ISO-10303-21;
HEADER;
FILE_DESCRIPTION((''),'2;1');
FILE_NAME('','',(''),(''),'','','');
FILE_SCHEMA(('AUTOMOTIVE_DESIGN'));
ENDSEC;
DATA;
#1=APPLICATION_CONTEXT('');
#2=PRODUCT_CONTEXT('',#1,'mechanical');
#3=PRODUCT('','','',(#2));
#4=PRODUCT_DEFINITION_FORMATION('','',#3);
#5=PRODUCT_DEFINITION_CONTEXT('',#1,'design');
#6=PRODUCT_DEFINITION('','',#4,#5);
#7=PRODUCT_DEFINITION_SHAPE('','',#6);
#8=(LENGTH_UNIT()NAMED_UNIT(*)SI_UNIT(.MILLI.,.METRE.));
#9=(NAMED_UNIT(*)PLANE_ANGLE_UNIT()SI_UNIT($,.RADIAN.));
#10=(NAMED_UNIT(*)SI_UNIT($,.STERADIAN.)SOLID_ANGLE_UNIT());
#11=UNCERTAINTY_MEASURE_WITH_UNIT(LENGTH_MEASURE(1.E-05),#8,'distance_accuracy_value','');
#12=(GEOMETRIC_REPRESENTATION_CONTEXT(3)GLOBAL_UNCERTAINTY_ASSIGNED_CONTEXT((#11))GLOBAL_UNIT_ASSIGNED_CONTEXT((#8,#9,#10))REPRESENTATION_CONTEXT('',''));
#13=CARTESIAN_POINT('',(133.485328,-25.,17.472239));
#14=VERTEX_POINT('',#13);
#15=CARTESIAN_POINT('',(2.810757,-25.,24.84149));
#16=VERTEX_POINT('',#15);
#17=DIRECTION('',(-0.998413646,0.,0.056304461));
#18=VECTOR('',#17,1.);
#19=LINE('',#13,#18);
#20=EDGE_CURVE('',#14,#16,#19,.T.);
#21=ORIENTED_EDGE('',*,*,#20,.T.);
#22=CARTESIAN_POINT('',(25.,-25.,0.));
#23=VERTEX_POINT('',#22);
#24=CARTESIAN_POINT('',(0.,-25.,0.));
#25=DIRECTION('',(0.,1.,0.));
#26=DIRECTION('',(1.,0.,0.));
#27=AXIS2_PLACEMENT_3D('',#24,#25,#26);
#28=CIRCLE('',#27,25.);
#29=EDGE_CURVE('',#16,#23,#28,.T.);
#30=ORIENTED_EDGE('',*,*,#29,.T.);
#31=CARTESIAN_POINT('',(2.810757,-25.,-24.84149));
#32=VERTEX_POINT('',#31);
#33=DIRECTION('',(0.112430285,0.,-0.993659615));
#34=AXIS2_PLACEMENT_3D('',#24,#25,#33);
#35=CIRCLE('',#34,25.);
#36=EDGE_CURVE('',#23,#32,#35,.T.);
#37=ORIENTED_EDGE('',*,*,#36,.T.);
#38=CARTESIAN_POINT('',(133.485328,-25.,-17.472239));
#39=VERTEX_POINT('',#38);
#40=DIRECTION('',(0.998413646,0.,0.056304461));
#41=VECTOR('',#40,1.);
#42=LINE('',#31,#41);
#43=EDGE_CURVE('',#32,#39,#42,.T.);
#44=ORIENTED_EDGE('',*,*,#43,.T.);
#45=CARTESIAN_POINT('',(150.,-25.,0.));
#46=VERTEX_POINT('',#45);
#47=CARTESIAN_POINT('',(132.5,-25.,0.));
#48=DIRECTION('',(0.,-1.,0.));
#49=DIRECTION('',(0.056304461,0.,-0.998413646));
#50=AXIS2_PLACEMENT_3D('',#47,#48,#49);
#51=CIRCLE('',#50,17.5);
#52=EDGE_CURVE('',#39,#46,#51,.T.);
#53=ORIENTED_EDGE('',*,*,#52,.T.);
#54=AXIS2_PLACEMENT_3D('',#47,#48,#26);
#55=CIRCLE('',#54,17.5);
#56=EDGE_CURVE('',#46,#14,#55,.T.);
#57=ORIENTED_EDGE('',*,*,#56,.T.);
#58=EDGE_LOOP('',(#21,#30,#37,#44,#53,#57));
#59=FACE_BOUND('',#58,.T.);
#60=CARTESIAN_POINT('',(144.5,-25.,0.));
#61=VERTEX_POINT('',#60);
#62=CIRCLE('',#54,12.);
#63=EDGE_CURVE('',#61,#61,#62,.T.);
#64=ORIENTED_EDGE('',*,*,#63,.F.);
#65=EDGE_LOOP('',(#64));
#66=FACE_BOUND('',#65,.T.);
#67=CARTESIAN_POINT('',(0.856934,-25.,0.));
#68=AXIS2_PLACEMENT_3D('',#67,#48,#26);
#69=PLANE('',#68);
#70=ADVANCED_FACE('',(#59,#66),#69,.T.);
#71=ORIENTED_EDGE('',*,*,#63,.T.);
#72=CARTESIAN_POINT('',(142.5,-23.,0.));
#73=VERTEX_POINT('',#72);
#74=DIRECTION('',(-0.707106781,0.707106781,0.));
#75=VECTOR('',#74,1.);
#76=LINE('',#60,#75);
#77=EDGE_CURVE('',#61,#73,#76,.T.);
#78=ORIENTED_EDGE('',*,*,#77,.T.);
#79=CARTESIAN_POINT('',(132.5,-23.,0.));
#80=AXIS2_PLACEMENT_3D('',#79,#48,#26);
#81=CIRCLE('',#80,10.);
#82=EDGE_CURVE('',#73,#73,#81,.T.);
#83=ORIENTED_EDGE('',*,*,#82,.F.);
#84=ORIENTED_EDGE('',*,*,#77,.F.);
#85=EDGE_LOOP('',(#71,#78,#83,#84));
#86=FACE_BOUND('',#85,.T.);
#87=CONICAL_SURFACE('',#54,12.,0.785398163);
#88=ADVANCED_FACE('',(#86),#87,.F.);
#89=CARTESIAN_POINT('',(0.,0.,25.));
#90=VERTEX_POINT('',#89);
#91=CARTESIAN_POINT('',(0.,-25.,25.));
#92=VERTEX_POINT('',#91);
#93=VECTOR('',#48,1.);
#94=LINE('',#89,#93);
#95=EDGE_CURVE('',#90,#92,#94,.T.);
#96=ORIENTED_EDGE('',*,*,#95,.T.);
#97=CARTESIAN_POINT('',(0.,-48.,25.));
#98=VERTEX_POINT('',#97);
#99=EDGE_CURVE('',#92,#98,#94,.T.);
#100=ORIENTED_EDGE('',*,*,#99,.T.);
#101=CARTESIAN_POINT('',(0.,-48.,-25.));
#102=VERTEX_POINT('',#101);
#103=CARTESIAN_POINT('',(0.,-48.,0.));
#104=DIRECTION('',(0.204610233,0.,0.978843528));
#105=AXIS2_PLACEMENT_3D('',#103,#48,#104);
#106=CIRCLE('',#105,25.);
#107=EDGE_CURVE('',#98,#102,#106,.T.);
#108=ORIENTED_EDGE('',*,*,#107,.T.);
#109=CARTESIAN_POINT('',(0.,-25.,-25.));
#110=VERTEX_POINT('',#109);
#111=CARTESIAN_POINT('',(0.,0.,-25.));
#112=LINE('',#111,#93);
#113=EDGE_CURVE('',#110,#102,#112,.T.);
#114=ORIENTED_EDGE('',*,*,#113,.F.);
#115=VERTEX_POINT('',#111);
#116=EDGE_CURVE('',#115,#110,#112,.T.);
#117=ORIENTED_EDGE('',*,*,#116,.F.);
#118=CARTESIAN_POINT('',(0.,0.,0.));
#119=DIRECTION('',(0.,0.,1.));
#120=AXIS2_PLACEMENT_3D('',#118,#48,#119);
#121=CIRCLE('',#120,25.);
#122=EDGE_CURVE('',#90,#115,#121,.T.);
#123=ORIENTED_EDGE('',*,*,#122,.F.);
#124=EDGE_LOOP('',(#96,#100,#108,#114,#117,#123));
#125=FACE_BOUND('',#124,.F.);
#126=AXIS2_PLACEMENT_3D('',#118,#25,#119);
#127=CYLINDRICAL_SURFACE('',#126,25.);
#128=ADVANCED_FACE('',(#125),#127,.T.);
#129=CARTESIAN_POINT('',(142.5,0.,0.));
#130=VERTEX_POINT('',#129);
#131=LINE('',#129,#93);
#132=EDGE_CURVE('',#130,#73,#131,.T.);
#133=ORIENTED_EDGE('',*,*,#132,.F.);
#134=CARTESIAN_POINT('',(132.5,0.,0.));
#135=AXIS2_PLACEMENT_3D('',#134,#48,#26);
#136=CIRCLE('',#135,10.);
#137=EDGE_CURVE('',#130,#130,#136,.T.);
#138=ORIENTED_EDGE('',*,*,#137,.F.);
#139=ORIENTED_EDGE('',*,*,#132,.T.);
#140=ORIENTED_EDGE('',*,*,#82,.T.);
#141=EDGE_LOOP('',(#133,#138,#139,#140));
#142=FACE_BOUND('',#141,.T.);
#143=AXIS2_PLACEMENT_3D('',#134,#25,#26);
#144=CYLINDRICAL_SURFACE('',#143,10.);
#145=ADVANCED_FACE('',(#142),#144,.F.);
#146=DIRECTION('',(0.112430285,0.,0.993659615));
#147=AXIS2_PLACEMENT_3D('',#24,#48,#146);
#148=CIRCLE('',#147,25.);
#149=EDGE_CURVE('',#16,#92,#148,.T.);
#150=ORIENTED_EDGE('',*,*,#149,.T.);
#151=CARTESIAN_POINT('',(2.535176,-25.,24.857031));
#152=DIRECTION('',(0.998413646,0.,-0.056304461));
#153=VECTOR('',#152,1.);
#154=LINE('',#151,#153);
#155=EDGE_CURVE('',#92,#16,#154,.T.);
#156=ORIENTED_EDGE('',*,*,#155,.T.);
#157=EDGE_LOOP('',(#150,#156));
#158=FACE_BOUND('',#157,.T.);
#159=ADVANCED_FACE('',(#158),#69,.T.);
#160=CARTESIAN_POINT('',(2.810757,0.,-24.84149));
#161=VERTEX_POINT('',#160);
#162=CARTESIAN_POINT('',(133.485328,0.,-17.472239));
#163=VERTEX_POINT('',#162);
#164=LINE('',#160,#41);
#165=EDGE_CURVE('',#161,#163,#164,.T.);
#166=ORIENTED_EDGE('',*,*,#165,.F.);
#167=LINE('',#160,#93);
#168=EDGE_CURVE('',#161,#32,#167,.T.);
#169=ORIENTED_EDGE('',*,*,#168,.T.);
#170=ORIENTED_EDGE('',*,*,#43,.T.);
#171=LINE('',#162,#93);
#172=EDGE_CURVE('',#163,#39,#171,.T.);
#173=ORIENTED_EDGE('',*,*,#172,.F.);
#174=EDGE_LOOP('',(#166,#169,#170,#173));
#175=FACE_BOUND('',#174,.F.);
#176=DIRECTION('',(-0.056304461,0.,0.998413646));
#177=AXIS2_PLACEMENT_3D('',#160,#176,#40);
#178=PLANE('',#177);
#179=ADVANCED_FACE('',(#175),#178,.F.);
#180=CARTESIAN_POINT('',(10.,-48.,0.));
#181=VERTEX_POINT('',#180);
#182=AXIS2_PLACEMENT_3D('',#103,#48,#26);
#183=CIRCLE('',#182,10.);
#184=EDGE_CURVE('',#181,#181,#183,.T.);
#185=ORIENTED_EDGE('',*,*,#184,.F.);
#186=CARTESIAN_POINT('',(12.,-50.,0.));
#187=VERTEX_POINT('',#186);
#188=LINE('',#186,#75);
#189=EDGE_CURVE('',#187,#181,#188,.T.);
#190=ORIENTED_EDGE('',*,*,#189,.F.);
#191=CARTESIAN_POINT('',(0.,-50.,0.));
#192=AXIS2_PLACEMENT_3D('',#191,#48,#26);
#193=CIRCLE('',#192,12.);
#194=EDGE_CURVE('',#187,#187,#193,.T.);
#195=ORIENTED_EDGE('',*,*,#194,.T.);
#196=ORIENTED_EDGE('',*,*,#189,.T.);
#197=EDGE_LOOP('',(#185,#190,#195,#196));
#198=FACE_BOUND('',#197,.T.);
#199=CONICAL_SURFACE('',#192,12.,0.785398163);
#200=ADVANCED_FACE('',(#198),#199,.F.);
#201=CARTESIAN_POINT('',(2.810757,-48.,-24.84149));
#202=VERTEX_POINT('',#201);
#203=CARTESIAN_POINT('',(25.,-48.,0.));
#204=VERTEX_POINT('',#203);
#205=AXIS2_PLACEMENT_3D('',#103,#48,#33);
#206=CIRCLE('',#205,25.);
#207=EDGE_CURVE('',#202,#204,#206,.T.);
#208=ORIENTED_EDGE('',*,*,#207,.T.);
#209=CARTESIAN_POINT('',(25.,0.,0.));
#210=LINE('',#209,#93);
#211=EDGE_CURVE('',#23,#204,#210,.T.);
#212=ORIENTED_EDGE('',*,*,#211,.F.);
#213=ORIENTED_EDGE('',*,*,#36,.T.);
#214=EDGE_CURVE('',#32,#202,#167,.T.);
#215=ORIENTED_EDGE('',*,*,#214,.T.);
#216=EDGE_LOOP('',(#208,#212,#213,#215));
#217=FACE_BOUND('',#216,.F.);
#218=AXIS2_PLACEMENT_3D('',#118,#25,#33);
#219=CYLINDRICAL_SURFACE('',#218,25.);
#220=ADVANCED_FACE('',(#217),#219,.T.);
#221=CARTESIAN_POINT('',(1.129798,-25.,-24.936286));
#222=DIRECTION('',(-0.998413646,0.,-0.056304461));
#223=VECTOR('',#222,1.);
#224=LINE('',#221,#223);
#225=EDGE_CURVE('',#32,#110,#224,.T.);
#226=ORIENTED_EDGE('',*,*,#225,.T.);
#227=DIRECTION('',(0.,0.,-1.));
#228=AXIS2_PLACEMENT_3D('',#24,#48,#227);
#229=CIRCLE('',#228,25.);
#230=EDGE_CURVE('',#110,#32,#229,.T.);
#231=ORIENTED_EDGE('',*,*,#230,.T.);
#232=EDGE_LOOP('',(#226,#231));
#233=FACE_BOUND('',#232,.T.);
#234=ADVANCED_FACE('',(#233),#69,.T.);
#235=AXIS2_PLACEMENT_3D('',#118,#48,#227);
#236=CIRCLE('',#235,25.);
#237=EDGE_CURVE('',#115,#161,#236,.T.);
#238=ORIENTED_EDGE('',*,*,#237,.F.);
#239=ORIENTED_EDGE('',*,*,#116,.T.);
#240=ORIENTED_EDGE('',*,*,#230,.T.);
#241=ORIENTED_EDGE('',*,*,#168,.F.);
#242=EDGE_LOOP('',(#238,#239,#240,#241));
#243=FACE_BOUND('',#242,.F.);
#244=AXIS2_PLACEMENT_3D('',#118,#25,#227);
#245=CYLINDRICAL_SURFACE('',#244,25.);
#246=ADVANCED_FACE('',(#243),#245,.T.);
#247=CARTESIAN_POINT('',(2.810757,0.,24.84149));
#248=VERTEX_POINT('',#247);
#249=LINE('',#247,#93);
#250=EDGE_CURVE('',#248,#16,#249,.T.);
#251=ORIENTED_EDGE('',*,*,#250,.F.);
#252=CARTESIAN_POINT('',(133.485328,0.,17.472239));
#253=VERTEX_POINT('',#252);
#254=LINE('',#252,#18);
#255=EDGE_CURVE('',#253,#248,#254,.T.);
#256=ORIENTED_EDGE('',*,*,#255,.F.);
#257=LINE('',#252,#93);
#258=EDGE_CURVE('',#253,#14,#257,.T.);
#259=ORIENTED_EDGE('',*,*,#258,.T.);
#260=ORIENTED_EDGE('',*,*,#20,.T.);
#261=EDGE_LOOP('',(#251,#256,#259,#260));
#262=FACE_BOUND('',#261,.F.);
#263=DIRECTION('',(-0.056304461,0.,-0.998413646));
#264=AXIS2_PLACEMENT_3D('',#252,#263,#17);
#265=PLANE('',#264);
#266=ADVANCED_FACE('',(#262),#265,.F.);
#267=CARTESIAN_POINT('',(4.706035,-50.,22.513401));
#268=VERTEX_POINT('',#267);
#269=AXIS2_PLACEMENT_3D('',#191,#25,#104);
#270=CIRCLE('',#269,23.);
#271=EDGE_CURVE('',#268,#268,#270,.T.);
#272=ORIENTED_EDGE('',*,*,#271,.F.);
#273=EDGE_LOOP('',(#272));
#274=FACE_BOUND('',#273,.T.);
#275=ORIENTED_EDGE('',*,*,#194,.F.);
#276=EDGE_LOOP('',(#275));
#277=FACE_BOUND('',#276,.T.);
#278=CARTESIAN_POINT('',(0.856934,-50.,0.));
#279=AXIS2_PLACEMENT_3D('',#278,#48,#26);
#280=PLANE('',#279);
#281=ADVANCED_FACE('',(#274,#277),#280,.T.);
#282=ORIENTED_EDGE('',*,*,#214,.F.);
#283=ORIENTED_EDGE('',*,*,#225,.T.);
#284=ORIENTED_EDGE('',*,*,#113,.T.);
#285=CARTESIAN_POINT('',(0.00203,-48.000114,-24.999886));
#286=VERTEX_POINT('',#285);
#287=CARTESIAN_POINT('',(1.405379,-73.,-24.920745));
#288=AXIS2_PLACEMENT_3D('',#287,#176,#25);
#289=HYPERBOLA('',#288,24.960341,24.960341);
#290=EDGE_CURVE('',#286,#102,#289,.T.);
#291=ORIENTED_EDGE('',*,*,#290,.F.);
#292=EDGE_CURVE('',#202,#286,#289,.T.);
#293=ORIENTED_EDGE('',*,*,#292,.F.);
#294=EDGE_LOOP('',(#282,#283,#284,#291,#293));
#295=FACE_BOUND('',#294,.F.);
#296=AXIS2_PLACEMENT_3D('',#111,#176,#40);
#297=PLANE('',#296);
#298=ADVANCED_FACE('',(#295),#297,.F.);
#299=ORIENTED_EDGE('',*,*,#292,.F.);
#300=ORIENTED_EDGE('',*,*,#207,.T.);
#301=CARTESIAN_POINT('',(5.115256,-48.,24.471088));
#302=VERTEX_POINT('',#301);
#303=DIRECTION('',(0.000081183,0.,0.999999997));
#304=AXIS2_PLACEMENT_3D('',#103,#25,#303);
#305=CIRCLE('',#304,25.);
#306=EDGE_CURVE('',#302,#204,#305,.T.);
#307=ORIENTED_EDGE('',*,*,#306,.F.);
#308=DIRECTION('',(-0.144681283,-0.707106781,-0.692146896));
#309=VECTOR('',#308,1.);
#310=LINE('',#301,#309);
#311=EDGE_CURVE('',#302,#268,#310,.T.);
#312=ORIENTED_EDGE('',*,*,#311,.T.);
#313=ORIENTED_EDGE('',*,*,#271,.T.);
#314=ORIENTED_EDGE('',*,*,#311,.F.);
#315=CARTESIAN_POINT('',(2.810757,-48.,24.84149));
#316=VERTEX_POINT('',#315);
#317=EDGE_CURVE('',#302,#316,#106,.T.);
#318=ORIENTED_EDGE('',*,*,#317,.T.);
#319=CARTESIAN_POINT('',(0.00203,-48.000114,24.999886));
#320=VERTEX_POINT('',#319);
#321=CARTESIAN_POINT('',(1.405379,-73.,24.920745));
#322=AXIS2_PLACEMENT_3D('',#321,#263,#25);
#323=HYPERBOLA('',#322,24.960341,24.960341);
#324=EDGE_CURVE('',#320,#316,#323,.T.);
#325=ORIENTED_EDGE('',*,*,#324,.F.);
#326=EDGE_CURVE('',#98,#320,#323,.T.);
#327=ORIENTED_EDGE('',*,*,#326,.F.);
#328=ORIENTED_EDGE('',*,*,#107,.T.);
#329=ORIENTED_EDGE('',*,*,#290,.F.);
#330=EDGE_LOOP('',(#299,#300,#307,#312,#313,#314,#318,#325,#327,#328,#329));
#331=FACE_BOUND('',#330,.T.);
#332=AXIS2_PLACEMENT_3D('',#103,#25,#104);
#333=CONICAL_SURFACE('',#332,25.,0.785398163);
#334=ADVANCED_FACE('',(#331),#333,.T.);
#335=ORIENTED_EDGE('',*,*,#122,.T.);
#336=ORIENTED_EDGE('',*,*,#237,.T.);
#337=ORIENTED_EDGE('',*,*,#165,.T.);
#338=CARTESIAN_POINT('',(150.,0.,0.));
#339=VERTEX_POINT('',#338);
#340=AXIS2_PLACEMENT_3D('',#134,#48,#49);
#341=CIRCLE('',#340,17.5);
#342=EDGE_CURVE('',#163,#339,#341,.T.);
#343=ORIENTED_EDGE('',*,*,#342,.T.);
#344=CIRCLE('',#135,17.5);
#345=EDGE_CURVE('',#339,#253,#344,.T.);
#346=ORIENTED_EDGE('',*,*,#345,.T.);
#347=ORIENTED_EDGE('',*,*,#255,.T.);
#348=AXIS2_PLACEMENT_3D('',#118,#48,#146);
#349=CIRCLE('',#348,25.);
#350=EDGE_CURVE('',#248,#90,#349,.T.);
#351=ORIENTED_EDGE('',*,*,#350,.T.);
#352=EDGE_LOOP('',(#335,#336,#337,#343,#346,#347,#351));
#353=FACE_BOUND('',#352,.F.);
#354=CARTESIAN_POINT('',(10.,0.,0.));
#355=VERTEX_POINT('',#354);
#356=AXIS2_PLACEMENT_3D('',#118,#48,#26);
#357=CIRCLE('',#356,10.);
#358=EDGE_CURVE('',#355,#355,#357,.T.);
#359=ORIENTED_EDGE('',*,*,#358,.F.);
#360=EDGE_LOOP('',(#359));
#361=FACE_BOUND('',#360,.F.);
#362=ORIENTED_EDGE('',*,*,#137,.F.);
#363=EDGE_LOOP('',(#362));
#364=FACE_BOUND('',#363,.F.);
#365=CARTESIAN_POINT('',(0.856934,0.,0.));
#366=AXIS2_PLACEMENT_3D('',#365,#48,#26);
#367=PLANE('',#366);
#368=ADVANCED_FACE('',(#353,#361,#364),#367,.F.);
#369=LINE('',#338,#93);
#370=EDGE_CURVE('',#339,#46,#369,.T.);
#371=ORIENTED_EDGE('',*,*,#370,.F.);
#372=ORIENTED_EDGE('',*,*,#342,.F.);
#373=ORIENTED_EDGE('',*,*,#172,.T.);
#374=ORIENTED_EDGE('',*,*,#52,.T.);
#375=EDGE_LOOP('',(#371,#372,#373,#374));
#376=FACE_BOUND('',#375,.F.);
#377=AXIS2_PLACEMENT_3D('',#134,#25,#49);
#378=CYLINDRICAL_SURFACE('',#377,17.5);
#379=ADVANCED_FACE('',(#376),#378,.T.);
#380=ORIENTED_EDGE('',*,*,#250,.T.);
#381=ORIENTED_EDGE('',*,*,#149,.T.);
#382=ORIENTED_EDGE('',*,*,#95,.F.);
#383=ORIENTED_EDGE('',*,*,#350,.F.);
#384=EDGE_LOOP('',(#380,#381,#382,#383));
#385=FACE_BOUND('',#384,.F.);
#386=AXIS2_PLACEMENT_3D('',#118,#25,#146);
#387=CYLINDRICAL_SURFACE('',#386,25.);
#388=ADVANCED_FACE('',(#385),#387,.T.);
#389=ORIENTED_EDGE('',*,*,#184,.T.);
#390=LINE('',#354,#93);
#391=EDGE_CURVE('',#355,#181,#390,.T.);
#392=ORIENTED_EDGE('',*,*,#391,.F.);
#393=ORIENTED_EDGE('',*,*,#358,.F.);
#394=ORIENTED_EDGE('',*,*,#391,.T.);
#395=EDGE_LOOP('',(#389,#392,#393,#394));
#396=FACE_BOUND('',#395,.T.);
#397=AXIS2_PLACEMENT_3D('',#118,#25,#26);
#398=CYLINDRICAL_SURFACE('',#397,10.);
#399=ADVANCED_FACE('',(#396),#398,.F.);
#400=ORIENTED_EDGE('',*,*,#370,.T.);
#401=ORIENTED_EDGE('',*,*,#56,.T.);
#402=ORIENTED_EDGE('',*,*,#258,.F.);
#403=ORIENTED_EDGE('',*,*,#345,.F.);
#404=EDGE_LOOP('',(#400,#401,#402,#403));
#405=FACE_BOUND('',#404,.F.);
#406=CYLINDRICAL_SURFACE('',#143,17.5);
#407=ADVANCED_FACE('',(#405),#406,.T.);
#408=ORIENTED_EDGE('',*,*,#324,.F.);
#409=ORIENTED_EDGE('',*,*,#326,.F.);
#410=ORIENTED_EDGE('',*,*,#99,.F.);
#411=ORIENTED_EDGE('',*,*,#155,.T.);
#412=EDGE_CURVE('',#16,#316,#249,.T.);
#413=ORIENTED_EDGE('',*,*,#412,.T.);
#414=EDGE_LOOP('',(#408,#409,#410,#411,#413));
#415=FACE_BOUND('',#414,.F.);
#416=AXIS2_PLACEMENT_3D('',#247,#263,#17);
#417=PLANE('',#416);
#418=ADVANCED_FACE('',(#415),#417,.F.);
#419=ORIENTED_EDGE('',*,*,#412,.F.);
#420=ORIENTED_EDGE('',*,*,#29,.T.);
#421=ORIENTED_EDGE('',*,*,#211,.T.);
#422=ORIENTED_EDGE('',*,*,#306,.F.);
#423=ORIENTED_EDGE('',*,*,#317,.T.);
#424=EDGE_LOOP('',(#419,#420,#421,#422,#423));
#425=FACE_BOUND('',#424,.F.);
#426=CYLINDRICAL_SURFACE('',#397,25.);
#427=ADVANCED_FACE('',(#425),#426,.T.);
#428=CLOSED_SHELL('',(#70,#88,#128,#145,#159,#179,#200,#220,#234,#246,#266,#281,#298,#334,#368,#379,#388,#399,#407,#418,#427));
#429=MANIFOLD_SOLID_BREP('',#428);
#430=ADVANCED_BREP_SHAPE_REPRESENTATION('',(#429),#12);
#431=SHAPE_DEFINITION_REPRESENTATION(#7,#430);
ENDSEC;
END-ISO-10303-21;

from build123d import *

# Parameters (mm, degrees)
F0_R        = 10
F1_DEPTH    = 25
F2_DEPTH    = 50
F3_T4_ANGLE = 203.6133668192
F3_T6_ANGLE = 179.9906971182


# Not quite as in the source:
# - a fillet or chamfer that OpenCascade refuses, or shapes differently, is made with other operations: its cross-section is extruded or revolved along the edge and cut away or added


with BuildPart() as f1:
    # F0 (on Front) → F1 (new body)
    with BuildSketch(Plane.XZ):
        with BuildLine():
            Line((2.8107571296, 24.8414903812), (0, 25))
            ThreePointArc((0, 25), (-25, 0), (0, -25))
            Line((0, -25), (2.8107571296, -24.8414903812))
            ThreePointArc((2.8107571296, -24.8414903812), (18.6449581421, -16.6542948179), (25, 0))
            ThreePointArc((25, 0), (18.6449581421, 16.6542948179), (2.8107571296, 24.8414903812))
        make_face()
        Circle(F0_R, mode=Mode.SUBTRACT)
        with BuildLine():
            ThreePointArc((2.8107571296, 24.8414903812), (1.4076115356, 24.9603411388), (0, 25))
            Line((0, 25), (2.8107571296, 24.8414903812))
        make_face()
        with BuildLine():
            Line((2.8107571296, -24.8414903812), (0, -25))
            ThreePointArc((0, -25), (1.4076115356, -24.9603411388), (2.8107571296, -24.8414903812))
        make_face()
        with BuildLine():
            Line((133.4853280749, 17.4722387972), (2.8107571296, 24.8414903812))
            ThreePointArc((2.8107571296, 24.8414903812), (18.6449581421, 16.6542948179), (25, 0))
            ThreePointArc((25, 0), (18.6449581421, -16.6542948179), (2.8107571296, -24.8414903812))
            Line((2.8107571296, -24.8414903812), (133.4853280749, -17.4722387972))
            ThreePointArc((133.4853280749, -17.4722387972), (115, 0), (133.4853280749, 17.4722387972))
        make_face()
        with BuildLine():
            ThreePointArc((150, 0), (145.2179644855, 12.0209558415), (133.4853280749, 17.4722387972))
            ThreePointArc((133.4853280749, 17.4722387972), (115, 0), (133.4853280749, -17.4722387972))
            ThreePointArc((133.4853280749, -17.4722387972), (145.2179644855, -12.0209558415), (150, 0))
        make_face()
        with Locations((132.5, 0)):
            Circle(F0_R, mode=Mode.SUBTRACT)
    extrude(amount=F1_DEPTH)

    # F0 (on Front) → F2 (join)
    with BuildSketch(Plane.XZ):
        with BuildLine():
            Line((2.8107571296, 24.8414903812), (0, 25))
            ThreePointArc((0, 25), (-25, 0), (0, -25))
            Line((0, -25), (2.8107571296, -24.8414903812))
            ThreePointArc((2.8107571296, -24.8414903812), (18.6449581421, -16.6542948179), (25, 0))
            ThreePointArc((25, 0), (18.6449581421, 16.6542948179), (2.8107571296, 24.8414903812))
        make_face()
        Circle(F0_R, mode=Mode.SUBTRACT)
    extrude(amount=F2_DEPTH)

    # F3: chamfer of 2 on 4 edges, made by hand

    # F3_s1 → F3_t2 (revolve, cut)
    with BuildSketch(Plane.XY):
        Polygon((12, -50), (10, -48), (10, -50), align=None)
    revolve(axis=Axis((0, -50, 0), (0, -1, 0)), mode=Mode.SUBTRACT)

    # F3_s3 → F3_t4 (revolve, cut)
    with BuildSketch(Plane(origin=(0, 0, 0), x_dir=(0, 1, 0), z_dir=(0.9788435281, 0, -0.2046102329))):
        Polygon((-48, 25), (-50, 23), (-50, 25), align=None)
    revolve(axis=Axis((0, -50, 0), (0, -1, 0)), revolution_arc=F3_T4_ANGLE, mode=Mode.SUBTRACT)

    # F3_s5 → F3_t6 (revolve, cut)
    with BuildSketch(Plane(origin=(0, 0, 0), x_dir=(0, 1, 0), z_dir=(-0.9999999967, 0, 8.1183e-05))):
        Polygon((-48, -25), (-50, -23), (-50, -25), align=None)
    revolve(axis=Axis((0, -50, 0), (0, 1, 0)), revolution_arc=F3_T6_ANGLE, mode=Mode.SUBTRACT)

    # F3_s7 → F3_t8 (revolve, cut)
    with BuildSketch(Plane.XY):
        Polygon((144.5, -25), (142.5, -23), (142.5, -25), align=None)
    revolve(axis=Axis((132.5, -25, 0), (0, -1, 0)), mode=Mode.SUBTRACT)


solid = f1.part
